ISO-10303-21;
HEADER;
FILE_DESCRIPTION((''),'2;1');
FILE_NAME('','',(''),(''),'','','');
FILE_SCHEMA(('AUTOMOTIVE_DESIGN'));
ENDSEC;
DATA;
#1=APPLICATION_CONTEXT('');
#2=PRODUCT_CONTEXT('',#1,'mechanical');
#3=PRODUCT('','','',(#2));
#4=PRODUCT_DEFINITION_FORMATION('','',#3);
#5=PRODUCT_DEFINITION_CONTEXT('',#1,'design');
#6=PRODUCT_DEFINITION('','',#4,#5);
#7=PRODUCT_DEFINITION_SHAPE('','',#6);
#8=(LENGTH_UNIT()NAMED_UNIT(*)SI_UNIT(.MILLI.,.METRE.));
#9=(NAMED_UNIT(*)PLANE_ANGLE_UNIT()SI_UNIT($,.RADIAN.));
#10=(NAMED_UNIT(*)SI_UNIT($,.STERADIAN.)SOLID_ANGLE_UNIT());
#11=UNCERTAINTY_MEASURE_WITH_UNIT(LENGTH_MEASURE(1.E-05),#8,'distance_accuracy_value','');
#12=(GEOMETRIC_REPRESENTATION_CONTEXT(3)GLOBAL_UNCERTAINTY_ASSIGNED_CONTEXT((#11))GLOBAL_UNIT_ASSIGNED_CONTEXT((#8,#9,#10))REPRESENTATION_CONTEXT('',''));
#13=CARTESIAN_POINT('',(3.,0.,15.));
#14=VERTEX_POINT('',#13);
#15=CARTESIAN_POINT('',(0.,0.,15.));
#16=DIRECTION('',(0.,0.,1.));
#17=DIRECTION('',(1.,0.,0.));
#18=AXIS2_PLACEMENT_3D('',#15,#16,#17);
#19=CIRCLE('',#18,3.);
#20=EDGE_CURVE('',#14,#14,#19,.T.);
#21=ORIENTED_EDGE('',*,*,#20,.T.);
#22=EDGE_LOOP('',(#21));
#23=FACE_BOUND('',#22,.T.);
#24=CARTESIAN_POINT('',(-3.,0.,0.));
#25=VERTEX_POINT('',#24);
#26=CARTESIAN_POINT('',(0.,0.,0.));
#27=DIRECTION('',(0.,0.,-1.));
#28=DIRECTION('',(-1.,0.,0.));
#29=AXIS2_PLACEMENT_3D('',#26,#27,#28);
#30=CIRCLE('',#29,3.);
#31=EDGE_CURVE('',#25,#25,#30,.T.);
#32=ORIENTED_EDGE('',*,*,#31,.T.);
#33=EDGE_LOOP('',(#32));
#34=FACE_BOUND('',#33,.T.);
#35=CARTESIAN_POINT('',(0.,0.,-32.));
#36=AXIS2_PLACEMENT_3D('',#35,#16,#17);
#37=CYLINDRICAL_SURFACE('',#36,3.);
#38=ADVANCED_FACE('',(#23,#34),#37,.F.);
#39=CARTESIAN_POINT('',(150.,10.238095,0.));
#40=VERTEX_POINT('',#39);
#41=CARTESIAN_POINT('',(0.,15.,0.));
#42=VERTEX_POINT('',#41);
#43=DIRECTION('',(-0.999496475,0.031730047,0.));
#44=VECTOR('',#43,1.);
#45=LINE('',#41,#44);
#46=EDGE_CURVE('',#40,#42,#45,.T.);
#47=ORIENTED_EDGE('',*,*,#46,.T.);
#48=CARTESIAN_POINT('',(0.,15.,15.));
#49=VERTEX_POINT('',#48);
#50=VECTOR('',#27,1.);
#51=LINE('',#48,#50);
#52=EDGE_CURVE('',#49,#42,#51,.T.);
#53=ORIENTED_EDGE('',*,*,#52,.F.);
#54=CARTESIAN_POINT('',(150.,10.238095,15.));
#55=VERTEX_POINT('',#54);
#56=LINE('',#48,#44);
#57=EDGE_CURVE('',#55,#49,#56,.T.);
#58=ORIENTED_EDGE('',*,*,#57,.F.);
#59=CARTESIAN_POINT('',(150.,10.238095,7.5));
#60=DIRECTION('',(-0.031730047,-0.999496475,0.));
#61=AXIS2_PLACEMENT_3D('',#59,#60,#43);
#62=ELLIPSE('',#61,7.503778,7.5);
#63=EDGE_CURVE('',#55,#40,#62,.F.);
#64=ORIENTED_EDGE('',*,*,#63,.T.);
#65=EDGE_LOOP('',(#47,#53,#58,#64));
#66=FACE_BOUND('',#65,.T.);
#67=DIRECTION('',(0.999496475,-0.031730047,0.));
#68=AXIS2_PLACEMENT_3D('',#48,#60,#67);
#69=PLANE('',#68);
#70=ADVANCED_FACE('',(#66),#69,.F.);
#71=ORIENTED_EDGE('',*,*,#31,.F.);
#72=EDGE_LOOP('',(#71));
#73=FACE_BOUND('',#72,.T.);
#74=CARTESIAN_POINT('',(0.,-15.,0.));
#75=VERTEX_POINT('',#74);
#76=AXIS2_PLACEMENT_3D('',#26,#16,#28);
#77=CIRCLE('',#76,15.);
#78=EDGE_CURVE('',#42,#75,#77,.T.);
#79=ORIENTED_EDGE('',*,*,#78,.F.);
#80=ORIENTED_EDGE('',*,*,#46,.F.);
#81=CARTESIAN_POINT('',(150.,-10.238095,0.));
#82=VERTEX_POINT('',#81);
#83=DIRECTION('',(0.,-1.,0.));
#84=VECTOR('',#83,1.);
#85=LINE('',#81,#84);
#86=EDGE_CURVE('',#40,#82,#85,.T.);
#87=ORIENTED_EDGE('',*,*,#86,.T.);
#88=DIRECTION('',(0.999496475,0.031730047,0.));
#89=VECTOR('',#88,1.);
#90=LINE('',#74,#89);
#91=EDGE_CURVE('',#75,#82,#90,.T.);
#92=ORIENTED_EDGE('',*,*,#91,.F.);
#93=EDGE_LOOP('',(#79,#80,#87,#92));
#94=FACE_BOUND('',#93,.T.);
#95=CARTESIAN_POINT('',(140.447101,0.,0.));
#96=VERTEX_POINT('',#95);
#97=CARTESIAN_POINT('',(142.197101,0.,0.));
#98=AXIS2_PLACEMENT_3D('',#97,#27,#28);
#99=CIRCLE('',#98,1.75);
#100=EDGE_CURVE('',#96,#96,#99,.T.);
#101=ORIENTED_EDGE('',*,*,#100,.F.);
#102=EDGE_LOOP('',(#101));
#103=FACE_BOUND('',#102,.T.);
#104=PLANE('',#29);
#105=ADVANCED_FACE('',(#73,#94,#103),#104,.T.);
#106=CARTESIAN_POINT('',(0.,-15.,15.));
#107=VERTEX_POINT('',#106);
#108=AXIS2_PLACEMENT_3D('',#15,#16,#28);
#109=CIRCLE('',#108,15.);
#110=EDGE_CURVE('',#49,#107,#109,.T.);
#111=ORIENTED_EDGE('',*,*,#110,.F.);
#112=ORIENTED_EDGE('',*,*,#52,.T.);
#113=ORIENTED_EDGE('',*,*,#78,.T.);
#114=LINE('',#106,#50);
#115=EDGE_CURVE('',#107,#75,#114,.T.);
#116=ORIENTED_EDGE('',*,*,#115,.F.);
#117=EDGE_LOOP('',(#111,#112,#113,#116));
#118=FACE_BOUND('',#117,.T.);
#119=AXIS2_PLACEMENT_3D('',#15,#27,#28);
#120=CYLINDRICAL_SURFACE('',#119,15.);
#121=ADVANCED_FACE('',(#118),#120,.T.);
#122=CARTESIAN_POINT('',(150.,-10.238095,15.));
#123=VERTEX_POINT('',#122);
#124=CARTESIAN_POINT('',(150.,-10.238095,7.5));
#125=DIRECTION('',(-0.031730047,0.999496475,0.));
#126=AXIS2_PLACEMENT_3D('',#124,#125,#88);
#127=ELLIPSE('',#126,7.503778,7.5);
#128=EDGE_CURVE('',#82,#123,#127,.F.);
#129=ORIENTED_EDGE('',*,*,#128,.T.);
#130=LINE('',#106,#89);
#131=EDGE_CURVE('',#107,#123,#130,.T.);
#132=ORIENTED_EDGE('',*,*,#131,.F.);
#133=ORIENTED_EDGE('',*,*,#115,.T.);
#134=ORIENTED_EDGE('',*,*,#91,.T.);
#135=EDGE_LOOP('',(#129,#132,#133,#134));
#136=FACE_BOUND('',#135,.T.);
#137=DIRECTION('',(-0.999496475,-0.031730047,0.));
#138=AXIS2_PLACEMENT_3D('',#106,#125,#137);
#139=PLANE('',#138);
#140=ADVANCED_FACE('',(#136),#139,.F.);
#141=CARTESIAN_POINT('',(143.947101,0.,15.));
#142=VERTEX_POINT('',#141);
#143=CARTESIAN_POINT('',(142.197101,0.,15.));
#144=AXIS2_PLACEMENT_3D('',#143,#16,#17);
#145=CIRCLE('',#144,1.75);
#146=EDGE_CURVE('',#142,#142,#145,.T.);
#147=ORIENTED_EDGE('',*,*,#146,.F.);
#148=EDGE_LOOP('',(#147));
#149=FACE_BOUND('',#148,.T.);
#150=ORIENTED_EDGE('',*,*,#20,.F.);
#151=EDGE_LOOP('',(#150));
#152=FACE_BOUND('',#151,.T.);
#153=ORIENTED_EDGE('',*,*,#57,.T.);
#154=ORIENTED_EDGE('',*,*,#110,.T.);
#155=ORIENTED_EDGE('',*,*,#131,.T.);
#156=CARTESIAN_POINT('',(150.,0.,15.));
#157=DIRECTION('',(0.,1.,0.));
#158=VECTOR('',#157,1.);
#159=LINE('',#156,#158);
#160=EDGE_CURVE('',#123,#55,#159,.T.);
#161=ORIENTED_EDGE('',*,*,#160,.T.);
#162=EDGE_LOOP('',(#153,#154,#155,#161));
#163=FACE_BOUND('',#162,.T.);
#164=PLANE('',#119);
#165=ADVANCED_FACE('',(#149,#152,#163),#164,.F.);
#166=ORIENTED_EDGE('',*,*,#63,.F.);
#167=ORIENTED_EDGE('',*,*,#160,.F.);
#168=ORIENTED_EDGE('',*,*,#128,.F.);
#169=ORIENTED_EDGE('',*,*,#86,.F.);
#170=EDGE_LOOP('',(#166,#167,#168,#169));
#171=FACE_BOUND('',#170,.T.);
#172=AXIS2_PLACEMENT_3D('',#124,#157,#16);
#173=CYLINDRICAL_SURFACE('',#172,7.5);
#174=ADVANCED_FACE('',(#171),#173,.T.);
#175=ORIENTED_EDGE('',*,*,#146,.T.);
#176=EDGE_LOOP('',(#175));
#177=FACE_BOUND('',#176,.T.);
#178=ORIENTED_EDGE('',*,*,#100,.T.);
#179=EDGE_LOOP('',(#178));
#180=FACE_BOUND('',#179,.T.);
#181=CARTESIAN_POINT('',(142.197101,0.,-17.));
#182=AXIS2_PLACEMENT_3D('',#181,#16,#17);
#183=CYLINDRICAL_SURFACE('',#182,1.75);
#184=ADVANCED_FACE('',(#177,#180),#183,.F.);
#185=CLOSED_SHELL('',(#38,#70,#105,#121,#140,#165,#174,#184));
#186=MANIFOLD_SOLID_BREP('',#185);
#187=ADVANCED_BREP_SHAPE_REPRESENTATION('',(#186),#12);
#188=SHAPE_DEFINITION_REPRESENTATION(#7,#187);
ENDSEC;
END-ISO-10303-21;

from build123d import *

# Parameters (mm, degrees)
BOSS_EXTRUDE2_DEPTH = 15
FILLET4_START       = -11
FILLET4_DEPTH       = 22
SKETCH2_R           = 1.75
CUT_EXTRUDE1_DEPTH  = 32
SKETCH3_R           = 3
CUT_EXTRUDE2_DEPTH  = 47


with BuildPart() as part:
    # Sketch1 → Boss-Extrude2 (new body)
    with BuildSketch(Plane.XY):
        with BuildLine():
            Line((157.5, -10), (157.5, 10))
            Line((157.5, 10), (0, 15))
            ThreePointArc((0, 15), (-15, 0), (0, -15))
            Line((0, -15), (157.5, -10))
        make_face()
    extrude(amount=BOSS_EXTRUDE2_DEPTH)

    # Fillet4: read off the stored shape, not the designer's step
    # Fillet4 outline → Fillet4 (cut)
    with BuildSketch(Plane(origin=(0, 0, 0), x_dir=(1, 0, 0), z_dir=(0, 1, 0)).offset(FILLET4_START)):
        with BuildLine():
            ThreePointArc((150, 0), (155.303300859, -2.196699141), (157.5, -7.5))
            Line((157.5, -7.5), (157.5, 0))
            Line((157.5, 0), (150, 0))
        make_face()
        with BuildLine():
            ThreePointArc((157.5, -7.5), (155.303300859, -12.803300859), (150, -15))
            Line((150, -15), (157.5, -15))
            Line((157.5, -15), (157.5, -7.5))
        make_face()
    extrude(amount=FILLET4_DEPTH, mode=Mode.SUBTRACT)

    # Sketch2 → Cut-Extrude1 (cut)
    with BuildSketch(Plane.XY.offset(15)):
        with Locations((142.197100849, 0)):
            Circle(SKETCH2_R)
    extrude(amount=-CUT_EXTRUDE1_DEPTH, mode=Mode.SUBTRACT)

    # Sketch3 → Cut-Extrude2 (cut)
    with BuildSketch(Plane.XY.offset(15)):
        Circle(SKETCH3_R)
    extrude(amount=-CUT_EXTRUDE2_DEPTH, mode=Mode.SUBTRACT)


solid = part.part
